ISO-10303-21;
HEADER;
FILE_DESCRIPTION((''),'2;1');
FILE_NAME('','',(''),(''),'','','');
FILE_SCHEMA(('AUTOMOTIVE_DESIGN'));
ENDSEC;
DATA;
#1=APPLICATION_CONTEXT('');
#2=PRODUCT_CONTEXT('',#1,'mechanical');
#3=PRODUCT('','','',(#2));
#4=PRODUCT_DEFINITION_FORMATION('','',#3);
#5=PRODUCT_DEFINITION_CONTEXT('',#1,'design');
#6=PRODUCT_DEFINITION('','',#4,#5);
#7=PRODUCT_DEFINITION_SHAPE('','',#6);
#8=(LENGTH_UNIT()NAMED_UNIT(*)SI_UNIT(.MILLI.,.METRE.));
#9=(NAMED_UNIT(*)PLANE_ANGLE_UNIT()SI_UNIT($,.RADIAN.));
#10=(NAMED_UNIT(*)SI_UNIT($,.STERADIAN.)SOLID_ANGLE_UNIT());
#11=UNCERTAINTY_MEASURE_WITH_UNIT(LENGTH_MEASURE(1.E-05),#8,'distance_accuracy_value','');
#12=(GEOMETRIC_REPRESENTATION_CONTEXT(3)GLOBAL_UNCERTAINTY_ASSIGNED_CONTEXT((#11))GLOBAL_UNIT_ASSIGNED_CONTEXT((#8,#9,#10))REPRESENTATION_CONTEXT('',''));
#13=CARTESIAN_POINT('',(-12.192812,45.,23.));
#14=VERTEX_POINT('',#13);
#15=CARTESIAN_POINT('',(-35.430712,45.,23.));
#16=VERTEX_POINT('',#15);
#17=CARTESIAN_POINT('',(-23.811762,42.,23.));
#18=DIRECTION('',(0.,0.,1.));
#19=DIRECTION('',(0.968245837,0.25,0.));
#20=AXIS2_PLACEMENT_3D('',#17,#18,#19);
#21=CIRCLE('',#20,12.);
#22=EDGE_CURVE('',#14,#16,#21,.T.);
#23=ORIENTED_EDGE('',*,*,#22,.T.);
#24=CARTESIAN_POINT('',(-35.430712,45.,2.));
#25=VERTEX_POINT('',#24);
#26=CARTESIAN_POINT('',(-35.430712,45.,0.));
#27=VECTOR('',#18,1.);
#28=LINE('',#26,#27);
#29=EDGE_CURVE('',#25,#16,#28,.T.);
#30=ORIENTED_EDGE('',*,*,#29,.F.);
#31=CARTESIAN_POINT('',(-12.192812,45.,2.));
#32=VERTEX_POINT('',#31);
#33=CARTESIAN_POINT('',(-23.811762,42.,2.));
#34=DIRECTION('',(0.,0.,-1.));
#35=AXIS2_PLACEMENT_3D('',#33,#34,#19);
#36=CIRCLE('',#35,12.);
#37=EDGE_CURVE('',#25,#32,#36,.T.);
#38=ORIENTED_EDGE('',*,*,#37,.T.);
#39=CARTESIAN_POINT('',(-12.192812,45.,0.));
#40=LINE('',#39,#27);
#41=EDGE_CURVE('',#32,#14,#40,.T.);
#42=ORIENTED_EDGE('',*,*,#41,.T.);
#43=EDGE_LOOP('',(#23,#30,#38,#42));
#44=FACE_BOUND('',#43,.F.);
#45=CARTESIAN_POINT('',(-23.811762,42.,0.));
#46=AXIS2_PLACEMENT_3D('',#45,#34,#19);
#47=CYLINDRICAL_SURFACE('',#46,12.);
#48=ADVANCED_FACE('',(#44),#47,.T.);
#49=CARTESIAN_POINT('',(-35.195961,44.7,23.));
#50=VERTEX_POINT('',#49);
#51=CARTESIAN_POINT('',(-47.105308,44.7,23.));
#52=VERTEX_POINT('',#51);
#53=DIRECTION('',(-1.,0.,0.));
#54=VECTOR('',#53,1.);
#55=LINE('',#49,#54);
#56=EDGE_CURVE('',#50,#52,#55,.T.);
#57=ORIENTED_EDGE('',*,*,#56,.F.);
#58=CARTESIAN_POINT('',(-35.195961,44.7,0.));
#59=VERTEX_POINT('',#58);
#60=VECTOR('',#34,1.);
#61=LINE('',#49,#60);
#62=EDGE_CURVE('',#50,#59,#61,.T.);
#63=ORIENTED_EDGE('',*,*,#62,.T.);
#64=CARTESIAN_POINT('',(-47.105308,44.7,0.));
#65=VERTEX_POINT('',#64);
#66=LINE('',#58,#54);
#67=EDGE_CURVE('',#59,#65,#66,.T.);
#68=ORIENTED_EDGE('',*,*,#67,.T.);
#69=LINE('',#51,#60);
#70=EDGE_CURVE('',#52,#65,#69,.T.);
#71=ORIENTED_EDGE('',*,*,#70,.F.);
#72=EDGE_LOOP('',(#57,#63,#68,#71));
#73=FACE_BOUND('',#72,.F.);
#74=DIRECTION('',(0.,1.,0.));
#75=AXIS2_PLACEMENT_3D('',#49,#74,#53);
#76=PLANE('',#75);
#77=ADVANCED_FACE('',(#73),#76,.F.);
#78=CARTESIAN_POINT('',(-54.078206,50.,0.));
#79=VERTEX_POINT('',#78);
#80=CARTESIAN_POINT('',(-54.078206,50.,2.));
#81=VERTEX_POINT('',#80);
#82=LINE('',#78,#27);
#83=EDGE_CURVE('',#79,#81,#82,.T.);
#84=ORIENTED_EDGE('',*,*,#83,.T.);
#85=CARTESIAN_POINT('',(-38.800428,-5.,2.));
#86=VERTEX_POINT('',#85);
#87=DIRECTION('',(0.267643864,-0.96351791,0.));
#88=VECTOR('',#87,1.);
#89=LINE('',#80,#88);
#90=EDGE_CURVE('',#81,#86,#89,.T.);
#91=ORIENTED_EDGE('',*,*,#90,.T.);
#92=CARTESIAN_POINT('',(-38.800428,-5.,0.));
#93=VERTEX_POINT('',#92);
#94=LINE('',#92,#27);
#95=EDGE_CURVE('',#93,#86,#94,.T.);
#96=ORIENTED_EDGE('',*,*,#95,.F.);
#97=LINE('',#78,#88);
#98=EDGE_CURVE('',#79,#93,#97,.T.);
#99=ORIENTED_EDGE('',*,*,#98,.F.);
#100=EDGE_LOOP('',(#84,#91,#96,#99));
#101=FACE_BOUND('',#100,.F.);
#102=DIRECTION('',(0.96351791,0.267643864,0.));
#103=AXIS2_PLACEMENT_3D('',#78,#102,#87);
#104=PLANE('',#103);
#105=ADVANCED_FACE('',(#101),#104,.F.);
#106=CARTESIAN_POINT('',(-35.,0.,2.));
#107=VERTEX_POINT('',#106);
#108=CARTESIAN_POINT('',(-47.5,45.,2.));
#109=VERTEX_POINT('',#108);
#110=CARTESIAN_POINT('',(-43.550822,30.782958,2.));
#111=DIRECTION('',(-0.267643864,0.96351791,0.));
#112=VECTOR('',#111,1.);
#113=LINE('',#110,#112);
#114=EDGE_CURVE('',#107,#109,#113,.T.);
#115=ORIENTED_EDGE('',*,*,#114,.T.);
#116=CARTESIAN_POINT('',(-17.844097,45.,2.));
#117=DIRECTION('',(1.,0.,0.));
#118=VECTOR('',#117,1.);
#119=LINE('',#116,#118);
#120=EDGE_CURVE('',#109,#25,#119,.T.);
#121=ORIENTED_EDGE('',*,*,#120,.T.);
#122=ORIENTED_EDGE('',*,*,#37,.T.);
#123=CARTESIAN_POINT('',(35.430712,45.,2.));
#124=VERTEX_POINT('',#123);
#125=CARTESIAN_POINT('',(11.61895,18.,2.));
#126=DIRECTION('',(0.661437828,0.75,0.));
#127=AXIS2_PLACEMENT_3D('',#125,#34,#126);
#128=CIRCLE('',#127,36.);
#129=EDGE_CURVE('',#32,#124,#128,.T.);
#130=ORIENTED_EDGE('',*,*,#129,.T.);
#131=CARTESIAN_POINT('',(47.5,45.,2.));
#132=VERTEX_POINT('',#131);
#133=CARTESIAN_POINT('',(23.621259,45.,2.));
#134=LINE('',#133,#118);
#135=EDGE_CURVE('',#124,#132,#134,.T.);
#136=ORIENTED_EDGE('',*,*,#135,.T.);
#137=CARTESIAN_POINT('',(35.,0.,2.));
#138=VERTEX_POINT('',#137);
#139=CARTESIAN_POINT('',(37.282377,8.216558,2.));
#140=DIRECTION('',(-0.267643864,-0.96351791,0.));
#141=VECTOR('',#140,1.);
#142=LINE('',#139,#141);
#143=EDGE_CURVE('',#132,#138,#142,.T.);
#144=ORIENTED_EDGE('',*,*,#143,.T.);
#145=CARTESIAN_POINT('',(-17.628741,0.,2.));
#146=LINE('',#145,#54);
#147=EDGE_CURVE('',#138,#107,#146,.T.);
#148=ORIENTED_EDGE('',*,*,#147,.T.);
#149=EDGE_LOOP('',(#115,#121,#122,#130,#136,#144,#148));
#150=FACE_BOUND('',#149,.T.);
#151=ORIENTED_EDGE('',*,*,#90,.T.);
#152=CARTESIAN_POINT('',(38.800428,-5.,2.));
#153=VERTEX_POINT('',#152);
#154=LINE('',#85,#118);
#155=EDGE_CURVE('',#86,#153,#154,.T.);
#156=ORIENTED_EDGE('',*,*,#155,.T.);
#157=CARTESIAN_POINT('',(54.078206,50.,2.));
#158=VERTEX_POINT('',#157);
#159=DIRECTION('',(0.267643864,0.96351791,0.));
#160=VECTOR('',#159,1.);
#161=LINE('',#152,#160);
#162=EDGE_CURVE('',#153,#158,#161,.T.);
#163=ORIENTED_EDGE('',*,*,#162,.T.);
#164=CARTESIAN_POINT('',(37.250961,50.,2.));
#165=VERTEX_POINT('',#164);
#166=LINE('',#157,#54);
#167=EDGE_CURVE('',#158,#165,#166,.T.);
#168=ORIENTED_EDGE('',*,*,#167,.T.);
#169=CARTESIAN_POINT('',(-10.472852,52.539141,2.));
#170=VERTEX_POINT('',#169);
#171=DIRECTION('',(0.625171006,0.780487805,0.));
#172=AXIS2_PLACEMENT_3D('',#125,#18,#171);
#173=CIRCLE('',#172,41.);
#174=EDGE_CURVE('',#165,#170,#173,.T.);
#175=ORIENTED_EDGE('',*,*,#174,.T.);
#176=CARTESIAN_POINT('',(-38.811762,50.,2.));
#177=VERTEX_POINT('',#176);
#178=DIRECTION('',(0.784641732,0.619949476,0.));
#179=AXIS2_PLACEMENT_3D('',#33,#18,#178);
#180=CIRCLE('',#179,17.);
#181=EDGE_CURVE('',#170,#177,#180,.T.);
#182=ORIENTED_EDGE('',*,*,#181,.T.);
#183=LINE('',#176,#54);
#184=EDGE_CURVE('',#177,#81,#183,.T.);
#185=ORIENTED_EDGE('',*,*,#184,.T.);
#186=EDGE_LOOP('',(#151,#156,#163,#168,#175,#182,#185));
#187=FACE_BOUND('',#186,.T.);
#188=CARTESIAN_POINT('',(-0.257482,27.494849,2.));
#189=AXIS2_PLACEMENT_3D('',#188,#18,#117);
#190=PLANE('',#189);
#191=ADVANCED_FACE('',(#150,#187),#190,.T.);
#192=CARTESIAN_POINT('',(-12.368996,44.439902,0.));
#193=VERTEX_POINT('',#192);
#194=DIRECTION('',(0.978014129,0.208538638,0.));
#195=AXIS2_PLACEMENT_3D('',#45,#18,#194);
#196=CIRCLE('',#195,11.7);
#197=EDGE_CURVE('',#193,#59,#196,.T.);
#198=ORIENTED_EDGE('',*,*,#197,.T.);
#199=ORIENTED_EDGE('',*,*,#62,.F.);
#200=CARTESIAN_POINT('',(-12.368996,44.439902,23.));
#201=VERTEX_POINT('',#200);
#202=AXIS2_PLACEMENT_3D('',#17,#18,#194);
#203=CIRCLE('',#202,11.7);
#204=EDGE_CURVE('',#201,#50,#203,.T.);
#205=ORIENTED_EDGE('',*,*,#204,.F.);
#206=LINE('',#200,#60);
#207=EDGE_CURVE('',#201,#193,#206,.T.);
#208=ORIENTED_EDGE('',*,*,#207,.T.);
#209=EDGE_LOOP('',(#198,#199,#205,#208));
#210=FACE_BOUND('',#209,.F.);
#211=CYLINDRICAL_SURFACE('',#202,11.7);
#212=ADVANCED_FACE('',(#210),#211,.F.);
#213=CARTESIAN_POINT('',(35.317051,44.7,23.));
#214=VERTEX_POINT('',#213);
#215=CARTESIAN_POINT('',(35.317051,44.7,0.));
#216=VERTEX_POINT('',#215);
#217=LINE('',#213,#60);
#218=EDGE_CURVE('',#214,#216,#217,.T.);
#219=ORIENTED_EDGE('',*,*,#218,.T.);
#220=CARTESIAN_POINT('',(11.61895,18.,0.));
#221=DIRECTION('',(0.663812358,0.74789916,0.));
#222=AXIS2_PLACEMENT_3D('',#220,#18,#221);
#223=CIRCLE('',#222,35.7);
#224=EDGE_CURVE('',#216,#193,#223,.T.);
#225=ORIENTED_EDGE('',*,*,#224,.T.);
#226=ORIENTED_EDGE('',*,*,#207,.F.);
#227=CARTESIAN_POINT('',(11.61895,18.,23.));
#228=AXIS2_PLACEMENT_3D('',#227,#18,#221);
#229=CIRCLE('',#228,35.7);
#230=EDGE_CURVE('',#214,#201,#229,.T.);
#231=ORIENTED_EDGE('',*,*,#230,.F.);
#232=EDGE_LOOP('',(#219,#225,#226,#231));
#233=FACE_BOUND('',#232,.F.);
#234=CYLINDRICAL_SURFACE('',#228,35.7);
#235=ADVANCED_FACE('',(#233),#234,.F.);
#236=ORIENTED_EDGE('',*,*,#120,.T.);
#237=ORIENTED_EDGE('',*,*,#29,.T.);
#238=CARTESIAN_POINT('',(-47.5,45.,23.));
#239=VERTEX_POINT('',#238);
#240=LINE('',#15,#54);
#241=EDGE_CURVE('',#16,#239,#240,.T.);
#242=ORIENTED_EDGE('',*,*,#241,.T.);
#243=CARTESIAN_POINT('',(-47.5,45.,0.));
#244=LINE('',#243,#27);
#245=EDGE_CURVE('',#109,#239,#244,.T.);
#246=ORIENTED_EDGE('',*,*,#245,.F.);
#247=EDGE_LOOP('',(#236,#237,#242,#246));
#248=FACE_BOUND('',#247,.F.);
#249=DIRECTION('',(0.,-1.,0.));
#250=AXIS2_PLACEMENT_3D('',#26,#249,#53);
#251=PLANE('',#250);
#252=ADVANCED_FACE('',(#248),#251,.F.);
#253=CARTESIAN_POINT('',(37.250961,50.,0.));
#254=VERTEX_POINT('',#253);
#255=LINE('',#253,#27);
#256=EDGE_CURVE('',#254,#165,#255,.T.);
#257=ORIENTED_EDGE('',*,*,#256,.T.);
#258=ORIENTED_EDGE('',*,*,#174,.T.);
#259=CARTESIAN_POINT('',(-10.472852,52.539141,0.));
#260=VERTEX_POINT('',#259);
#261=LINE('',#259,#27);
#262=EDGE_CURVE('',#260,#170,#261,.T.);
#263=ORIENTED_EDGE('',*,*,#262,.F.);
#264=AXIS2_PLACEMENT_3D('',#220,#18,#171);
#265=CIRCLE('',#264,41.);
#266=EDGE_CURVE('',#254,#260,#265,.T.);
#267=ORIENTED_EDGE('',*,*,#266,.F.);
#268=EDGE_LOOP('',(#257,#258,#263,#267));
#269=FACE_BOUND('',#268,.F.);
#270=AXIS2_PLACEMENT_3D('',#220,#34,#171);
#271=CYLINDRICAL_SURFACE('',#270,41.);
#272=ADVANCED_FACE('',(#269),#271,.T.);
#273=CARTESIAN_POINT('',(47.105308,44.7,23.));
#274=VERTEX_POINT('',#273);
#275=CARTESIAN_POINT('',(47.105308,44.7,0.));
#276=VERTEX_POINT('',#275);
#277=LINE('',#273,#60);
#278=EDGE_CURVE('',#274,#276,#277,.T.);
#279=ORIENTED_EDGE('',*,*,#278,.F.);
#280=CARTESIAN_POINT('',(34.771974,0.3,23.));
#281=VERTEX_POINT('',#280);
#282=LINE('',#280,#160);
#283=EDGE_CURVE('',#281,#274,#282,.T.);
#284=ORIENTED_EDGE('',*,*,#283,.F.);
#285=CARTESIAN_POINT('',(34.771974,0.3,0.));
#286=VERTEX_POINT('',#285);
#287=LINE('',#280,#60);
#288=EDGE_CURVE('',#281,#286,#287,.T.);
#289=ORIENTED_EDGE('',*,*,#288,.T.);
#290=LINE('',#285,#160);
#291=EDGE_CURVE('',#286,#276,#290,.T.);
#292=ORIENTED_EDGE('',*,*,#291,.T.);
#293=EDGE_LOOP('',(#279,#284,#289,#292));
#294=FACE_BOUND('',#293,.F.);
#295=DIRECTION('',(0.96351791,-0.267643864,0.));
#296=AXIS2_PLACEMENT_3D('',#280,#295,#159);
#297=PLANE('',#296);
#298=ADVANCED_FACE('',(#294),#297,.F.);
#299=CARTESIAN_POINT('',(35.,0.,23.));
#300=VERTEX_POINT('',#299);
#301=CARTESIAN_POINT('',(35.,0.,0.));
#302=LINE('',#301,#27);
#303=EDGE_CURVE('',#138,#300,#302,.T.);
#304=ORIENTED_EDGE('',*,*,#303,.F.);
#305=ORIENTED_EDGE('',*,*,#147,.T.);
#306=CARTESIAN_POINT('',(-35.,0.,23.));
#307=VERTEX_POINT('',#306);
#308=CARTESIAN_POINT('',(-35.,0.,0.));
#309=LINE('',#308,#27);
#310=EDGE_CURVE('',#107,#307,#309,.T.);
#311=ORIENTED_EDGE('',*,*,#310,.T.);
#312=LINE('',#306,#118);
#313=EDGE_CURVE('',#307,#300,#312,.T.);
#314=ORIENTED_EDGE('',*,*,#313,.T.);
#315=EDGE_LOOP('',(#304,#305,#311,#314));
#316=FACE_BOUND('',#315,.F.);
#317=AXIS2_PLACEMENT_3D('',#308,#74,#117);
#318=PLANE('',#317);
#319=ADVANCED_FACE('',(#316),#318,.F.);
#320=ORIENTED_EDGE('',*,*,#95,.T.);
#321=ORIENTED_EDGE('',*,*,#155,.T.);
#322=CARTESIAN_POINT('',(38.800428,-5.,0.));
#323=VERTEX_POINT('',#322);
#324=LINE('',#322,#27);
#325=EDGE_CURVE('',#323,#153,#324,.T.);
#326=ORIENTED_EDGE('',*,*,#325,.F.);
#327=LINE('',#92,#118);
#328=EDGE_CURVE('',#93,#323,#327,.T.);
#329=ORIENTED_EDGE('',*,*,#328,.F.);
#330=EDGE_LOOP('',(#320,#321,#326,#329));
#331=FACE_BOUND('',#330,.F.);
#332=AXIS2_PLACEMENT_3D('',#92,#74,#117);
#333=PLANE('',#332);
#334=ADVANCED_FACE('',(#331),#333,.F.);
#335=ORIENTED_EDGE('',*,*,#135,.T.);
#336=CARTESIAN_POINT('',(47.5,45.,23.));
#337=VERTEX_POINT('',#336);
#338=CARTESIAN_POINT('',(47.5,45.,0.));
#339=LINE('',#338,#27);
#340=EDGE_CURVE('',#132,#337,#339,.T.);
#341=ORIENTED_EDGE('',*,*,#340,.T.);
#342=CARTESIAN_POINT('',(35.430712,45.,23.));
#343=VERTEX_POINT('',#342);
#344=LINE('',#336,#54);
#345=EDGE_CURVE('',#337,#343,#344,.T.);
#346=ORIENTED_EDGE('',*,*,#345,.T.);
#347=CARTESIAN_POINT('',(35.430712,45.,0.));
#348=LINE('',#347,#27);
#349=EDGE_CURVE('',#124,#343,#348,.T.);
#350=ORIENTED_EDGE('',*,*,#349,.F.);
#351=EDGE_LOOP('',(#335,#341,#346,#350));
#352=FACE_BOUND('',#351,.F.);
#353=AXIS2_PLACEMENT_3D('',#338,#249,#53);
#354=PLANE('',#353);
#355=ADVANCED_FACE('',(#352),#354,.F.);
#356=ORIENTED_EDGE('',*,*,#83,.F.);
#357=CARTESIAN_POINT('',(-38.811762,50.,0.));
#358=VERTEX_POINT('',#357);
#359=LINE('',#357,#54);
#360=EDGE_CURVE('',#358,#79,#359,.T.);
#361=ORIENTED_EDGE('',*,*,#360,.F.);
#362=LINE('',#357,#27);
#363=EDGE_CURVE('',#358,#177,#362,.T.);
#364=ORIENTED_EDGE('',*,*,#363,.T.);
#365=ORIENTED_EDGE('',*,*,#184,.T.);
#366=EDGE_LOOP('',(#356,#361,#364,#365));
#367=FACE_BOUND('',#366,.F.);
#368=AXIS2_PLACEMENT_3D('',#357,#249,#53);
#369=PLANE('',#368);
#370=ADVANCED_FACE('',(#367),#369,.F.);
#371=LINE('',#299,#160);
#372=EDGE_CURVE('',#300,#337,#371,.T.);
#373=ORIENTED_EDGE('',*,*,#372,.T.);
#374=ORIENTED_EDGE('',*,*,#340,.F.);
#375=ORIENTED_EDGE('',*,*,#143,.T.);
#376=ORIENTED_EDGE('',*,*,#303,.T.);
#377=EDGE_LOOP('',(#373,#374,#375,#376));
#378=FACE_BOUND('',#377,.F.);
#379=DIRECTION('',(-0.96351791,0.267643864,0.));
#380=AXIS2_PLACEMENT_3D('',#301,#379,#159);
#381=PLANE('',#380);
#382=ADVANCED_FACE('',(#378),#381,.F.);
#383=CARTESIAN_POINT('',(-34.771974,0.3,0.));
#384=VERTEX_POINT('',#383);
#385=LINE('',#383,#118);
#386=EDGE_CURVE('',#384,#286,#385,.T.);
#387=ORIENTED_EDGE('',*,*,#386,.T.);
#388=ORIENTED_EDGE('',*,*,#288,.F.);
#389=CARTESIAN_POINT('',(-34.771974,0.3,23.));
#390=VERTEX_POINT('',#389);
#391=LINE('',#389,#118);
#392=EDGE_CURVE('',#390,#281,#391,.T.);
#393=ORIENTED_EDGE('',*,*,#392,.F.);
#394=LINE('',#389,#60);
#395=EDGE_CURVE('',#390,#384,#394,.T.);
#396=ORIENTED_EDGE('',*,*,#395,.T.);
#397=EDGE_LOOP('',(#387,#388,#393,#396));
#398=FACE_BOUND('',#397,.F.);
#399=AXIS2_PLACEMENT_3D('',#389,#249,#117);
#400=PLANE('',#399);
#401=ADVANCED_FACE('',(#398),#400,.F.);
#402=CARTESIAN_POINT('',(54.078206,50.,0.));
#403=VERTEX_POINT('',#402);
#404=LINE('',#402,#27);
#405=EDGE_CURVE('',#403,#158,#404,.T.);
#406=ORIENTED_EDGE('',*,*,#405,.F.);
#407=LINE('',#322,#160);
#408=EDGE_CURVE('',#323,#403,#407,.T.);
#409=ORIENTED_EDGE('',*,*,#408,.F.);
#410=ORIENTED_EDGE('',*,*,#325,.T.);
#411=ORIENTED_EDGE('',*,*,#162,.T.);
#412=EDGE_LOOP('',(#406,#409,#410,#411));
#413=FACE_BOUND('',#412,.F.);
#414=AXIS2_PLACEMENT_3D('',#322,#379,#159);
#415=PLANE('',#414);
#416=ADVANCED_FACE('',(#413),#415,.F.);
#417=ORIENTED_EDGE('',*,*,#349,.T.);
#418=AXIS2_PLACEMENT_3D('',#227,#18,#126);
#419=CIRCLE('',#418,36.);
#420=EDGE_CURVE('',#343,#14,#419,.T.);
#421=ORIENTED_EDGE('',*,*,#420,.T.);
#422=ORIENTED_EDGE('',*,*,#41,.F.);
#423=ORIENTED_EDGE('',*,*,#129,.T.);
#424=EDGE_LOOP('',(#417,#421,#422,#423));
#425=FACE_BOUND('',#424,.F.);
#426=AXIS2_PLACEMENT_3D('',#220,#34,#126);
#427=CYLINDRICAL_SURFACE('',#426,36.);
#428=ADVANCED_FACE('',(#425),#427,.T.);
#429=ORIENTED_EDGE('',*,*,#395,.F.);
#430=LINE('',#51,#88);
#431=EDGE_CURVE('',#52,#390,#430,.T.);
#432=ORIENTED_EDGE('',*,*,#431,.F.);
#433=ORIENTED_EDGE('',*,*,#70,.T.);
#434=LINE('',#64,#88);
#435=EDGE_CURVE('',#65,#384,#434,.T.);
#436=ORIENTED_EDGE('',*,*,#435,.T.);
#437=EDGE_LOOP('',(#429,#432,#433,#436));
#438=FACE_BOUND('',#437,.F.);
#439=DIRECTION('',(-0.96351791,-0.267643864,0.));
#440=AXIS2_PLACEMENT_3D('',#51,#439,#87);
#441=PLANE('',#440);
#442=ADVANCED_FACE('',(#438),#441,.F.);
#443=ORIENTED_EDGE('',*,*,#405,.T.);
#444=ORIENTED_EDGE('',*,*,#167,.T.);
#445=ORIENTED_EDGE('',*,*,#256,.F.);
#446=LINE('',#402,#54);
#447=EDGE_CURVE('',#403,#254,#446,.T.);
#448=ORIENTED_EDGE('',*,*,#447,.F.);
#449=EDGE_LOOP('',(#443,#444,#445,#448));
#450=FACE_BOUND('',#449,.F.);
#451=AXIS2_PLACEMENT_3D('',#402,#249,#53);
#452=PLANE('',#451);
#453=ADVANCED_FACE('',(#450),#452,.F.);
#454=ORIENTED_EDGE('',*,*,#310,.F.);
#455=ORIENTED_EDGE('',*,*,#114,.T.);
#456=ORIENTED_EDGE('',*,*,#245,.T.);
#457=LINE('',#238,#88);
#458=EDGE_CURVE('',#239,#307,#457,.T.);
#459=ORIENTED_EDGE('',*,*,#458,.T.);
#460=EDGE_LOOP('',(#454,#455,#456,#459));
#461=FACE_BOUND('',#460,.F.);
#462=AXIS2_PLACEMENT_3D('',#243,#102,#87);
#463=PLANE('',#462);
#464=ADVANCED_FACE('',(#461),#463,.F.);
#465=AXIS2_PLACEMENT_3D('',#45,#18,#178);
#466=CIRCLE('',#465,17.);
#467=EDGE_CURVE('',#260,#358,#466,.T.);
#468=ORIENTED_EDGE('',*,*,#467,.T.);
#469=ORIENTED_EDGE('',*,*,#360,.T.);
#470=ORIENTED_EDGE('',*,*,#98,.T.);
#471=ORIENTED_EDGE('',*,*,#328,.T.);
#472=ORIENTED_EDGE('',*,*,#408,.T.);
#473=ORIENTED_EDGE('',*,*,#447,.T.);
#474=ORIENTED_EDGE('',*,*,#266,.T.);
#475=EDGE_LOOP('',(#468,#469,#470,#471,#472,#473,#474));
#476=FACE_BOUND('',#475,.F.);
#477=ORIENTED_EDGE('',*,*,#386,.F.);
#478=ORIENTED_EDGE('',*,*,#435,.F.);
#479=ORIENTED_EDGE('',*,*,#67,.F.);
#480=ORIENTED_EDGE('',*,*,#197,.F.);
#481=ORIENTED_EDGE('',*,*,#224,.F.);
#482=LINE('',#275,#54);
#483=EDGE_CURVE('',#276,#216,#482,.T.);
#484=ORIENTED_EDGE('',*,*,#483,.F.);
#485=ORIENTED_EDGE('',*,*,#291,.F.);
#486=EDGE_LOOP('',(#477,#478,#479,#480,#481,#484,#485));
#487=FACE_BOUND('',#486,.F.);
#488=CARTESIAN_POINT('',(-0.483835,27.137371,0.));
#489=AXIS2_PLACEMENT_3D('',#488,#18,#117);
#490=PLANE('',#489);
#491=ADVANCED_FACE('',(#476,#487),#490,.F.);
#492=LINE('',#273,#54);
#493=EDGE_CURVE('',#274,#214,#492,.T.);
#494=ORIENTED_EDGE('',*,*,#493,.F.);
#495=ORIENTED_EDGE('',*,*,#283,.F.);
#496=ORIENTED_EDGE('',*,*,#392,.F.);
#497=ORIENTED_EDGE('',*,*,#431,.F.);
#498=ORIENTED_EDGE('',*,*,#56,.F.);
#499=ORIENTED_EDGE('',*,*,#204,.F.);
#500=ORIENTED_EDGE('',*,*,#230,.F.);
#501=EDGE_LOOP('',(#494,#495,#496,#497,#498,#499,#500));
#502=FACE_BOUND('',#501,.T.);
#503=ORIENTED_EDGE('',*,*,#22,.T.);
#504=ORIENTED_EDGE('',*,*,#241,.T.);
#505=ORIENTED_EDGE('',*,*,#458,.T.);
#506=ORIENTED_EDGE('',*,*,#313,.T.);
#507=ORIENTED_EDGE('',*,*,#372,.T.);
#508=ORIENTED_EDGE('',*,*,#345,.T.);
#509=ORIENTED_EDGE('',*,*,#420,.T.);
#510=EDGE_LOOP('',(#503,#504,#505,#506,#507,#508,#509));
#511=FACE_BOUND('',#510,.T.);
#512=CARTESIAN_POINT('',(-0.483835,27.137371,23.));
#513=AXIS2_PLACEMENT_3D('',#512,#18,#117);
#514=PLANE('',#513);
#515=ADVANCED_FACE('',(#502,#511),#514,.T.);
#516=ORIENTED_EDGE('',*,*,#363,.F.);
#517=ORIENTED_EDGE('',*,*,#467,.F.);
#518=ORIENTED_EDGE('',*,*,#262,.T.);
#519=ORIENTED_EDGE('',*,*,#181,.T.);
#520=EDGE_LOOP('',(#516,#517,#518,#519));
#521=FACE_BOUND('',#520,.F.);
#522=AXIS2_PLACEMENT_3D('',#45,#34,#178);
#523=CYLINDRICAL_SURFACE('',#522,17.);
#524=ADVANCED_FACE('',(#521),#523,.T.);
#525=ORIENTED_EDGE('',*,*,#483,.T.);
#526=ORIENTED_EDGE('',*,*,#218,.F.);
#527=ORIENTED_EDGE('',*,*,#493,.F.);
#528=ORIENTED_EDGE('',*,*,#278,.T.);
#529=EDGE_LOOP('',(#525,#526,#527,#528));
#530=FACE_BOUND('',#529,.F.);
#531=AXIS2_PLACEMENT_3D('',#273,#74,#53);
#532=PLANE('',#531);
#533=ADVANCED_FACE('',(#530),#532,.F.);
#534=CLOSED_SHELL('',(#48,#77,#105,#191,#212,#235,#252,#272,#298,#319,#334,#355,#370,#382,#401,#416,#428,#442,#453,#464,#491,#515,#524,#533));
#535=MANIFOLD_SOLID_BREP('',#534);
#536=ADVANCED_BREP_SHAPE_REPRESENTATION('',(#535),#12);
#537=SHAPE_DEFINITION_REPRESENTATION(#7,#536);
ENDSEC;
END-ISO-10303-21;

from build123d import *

# Parameters (mm, degrees)
F2_DEPTH = 2
F3_DEPTH = 23
F5_DEPTH = 23


# Not quite as in the source:
# - a feature of the source that left no trace in its solid (it failed there, or was rolled back) is left out


with BuildPart() as f2:
    # F1 (on Top) → F2 (new body)
    with BuildSketch(Plane.XY):
        with BuildLine():
            ThreePointArc((37.2509612746, 50), (13.7972702688, 58.9420922887), (-10.4728523554, 52.5391410864))
            ThreePointArc((-10.4728523554, 52.5391410864), (-25.3288691863, 58.932170126), (-38.8117617996, 50))
            Line((-38.8117617996, 50), (-54.0782060256, 50))
            Line((-54.0782060256, 50), (-38.8004282479, -5))
            Line((-38.8004282479, -5), (38.8004282479, -5))
            Line((38.8004282479, -5), (54.0782060256, 50))
            Line((54.0782060256, 50), (37.2509612746, 50))
        make_face()
    extrude(amount=F2_DEPTH)

    # F0 (on Top) → F3 (join)
    with BuildSketch(Plane.XY):
        with BuildLine():
            Line((-35.4307118382, 45), (-47.5, 45))
            Line((-47.5, 45), (-35, 0))
            Line((-35, 0), (35, 0))
            Line((35, 0), (47.5, 45))
            Line((47.5, 45), (35.4307118382, 45))
            ThreePointArc((35.4307118382, 45), (11.6189500386, 54), (-12.192811761, 45))
            ThreePointArc((-12.192811761, 45), (-23.8117617996, 54), (-35.4307118382, 45))
        make_face()
    extrude(amount=F3_DEPTH)

    # F4 (on face) → F5 (cut, through all)
    with BuildSketch(Plane.XY.offset(23)):
        with BuildLine():
            ThreePointArc((35.3170512284, 44.7), (11.4242314878, 53.6994689692), (-12.3689964911, 44.4399020665))
            ThreePointArc((-12.3689964911, 44.4399020665), (-23.678456811, 53.6992405642), (-35.1959613762, 44.7))
            Line((-35.1959613762, 44.7), (-47.1053076385, 44.7))
            Line((-47.1053076385, 44.7), (-34.7719743051, 0.3))
            Line((-34.7719743051, 0.3), (34.7719743051, 0.3))
            Line((34.7719743051, 0.3), (47.1053076385, 44.7))
            Line((47.1053076385, 44.7), (35.3170512284, 44.7))
        make_face()
    extrude(amount=-F5_DEPTH, mode=Mode.SUBTRACT)


solid = f2.part
